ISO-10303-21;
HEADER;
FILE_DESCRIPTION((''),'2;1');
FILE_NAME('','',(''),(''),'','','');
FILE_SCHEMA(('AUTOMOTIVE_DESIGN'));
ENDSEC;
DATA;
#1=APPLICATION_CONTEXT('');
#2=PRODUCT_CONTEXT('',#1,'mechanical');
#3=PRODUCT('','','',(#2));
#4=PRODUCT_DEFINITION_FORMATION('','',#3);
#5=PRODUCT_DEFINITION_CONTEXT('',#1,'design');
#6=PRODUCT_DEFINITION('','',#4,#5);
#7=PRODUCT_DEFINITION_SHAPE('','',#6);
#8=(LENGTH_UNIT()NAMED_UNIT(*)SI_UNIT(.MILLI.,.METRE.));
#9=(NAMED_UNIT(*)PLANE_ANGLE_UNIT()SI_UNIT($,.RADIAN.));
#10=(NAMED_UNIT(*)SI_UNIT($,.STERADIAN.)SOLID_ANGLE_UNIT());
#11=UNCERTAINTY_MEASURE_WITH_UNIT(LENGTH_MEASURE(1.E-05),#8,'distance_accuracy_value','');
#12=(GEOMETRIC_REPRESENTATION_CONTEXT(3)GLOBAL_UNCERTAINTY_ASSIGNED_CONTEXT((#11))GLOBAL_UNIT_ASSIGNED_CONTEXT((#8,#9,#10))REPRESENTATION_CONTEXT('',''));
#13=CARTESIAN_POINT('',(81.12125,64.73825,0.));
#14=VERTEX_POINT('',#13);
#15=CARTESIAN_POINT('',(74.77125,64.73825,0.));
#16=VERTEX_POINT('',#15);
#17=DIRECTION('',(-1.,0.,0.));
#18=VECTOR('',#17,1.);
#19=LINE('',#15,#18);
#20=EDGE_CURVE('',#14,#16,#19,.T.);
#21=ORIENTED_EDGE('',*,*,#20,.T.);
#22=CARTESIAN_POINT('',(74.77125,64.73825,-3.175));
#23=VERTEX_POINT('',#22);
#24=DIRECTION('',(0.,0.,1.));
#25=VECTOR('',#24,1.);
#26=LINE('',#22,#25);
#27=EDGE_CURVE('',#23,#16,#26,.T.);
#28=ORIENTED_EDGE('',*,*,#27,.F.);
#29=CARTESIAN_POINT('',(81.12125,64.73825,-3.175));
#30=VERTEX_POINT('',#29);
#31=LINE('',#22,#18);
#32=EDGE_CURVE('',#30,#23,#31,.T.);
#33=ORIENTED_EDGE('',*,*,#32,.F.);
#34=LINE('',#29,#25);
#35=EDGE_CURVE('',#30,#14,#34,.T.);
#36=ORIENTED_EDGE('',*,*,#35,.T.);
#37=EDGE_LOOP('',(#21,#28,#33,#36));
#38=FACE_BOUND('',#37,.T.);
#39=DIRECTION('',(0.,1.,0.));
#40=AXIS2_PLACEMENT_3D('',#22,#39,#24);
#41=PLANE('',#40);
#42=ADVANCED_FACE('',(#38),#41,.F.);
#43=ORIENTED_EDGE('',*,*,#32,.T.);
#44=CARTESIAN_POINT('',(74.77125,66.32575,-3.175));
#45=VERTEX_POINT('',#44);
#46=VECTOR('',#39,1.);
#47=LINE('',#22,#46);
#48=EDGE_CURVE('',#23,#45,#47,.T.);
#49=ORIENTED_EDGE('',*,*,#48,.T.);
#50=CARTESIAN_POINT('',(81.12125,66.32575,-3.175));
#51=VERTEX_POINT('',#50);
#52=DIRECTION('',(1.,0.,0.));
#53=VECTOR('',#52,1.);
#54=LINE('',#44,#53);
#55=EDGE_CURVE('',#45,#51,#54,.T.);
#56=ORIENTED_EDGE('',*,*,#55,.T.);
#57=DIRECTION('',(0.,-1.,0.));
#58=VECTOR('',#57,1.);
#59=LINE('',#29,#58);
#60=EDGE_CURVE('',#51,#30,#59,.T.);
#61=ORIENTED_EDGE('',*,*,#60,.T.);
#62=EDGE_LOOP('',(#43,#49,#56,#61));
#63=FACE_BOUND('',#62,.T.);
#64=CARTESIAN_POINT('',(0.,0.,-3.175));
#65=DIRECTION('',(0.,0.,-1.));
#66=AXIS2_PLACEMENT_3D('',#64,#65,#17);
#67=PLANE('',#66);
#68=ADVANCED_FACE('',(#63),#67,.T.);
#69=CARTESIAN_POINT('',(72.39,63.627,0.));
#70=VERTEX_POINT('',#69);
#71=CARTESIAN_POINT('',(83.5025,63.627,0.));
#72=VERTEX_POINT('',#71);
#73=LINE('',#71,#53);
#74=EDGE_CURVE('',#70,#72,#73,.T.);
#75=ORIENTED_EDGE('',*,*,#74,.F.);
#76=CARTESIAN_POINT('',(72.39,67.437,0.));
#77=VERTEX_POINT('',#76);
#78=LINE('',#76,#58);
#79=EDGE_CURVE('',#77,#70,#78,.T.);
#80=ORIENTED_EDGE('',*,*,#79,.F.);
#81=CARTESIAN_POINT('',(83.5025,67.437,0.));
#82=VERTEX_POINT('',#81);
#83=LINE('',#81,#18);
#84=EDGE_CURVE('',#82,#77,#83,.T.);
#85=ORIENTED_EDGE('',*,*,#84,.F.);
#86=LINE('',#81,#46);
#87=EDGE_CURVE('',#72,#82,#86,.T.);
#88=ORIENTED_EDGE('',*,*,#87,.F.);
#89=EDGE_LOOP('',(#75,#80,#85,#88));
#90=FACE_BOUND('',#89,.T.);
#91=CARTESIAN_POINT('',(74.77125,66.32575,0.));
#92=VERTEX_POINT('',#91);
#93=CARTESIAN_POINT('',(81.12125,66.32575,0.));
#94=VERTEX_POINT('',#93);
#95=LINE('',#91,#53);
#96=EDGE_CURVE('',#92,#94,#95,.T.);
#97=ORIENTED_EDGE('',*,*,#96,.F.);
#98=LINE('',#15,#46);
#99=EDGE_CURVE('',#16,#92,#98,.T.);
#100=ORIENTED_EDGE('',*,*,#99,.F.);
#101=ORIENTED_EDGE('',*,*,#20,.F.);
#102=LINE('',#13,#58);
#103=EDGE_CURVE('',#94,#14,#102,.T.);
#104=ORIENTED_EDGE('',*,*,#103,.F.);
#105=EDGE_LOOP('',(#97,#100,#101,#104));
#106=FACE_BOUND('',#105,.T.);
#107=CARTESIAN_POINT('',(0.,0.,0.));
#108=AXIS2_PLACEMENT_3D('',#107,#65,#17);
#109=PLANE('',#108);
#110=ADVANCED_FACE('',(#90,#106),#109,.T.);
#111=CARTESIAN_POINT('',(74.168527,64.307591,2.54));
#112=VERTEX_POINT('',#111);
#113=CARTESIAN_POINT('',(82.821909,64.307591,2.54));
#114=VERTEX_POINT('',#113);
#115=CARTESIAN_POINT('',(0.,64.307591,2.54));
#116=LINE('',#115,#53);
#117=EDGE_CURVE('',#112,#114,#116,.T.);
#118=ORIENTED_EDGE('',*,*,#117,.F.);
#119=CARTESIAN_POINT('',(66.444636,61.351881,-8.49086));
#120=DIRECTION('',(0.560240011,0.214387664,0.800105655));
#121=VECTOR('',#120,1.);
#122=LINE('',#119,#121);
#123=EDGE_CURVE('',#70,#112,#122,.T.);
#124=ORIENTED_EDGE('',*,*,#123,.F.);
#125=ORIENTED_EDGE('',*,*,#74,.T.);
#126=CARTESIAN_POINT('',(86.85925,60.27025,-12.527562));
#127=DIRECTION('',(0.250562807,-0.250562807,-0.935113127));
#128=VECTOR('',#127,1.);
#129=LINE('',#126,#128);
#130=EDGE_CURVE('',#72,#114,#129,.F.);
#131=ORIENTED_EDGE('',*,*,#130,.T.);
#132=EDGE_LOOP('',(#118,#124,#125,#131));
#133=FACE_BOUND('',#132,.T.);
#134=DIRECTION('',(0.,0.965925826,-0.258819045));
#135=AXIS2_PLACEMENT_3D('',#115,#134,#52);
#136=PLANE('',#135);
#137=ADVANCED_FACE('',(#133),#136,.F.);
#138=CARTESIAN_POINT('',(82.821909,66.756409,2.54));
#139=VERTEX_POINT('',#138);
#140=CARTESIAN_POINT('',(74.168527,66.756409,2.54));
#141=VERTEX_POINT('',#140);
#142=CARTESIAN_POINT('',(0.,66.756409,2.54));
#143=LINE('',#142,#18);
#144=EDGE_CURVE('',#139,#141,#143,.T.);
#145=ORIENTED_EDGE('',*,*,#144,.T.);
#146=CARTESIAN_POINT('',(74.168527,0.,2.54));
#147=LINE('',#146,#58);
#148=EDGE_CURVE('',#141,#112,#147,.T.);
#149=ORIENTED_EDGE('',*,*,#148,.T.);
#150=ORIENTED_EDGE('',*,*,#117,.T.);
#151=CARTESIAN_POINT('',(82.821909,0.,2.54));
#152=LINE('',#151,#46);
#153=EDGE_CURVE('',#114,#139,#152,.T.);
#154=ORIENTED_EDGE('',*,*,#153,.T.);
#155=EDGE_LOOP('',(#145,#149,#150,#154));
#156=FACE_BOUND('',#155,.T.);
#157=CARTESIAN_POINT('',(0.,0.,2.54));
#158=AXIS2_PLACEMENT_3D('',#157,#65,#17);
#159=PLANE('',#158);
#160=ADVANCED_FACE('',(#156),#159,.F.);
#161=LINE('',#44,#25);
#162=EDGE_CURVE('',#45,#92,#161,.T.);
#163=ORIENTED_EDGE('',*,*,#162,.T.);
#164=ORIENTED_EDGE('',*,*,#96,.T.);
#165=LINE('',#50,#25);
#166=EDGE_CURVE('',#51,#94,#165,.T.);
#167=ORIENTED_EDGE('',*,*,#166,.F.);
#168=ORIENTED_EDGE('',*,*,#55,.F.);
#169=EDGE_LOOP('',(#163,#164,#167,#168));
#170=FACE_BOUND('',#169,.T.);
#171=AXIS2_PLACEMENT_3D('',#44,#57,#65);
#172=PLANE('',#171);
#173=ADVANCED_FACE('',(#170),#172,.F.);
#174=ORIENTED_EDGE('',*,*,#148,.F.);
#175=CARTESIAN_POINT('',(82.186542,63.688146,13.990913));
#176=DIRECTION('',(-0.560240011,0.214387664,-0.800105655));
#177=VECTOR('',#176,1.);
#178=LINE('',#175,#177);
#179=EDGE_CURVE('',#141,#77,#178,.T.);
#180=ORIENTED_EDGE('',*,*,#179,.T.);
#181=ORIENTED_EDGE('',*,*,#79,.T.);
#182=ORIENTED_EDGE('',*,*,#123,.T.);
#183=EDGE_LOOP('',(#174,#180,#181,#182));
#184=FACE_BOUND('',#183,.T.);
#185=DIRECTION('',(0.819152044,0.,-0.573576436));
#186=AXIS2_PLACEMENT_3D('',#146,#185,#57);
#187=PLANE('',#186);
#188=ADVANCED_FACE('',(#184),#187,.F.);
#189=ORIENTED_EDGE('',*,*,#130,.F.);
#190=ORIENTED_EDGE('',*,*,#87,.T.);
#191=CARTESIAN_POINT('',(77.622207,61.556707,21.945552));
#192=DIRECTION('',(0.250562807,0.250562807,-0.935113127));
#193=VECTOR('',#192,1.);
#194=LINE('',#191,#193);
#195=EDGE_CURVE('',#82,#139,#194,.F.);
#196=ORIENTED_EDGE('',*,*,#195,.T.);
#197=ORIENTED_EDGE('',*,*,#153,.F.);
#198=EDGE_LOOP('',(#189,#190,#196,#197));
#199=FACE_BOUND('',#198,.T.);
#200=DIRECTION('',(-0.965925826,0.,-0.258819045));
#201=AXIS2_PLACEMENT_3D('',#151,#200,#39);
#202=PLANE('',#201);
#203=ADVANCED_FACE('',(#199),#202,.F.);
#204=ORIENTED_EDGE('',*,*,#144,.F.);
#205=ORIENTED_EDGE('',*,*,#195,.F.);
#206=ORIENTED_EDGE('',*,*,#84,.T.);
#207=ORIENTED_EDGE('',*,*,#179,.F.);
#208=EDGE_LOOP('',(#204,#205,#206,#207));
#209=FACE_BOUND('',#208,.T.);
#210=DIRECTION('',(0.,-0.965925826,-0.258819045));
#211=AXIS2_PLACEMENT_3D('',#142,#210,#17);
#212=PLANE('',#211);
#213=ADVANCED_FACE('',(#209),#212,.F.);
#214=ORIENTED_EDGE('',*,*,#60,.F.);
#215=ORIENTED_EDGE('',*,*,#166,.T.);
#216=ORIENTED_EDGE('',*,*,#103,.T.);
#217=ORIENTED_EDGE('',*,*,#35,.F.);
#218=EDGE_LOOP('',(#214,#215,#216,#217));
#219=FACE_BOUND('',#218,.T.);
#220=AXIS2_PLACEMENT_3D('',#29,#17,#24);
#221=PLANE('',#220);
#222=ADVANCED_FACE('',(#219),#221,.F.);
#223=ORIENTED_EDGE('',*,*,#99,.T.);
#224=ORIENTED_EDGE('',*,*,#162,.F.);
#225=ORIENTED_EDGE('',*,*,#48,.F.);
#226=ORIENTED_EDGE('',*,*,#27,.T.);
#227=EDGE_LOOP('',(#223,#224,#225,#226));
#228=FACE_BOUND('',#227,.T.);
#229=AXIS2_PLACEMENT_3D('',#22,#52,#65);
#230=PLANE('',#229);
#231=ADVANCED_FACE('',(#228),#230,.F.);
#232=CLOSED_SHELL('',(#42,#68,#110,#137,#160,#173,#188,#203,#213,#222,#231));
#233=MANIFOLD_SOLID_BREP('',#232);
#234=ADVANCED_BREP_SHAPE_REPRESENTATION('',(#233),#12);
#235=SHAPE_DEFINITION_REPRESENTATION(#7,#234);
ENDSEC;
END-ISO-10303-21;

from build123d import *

# Parameters (mm, degrees)
SKETCH1_W           = 11.1125
SKETCH1_H           = 3.81
BOSS_EXTRUDE1_DEPTH = 2.54
CHAMFER1_SIZE       = 2.54
CHAMFER1_SIZE_2     = 1.778527147
CHAMFER2_SIZE       = 0.680590949
CHAMFER2_SIZE_2     = 2.54
SKETCH2_W           = 6.35
SKETCH2_H           = 1.5875
BOSS_EXTRUDE2_DEPTH = 3.175


with BuildPart() as part:
    # Sketch1 → Boss-Extrude1 (new body)
    with BuildSketch(Plane.XY):
        with Locations((77.94625, 65.532)):
            Rectangle(SKETCH1_W, SKETCH1_H)
    extrude(amount=BOSS_EXTRUDE1_DEPTH)

    # Chamfer1
    # the kernel refuses this chamfer: 2.54, 1.778527147 mm, written as the material it takes off along each edge
    with BuildSketch(Plane(origin=(72.39, 73.996682665, 2.54), x_dir=(-0.02220967419845826, 0, -0.9997533347641299), z_dir=(0, -1, 0))) as chamfer1_piece_1:
        Polygon((CHAMFER1_SIZE * 0.999753334764, CHAMFER1_SIZE * 0.0222096741985), (-CHAMFER1_SIZE_2 * 0.0222096741991, CHAMFER1_SIZE_2 * 0.999753334794), (0, 0), align=None)
    extrude(amount=16.92936533, mode=Mode.SUBTRACT)

    # Chamfer2
    # the kernel refuses this chamfer: 2.54, 0.680590949 mm, written as the material it takes off along each edge
    with BuildSketch(Plane(origin=(67.572854359, 63.627, 2.54), x_dir=(0, 0.9905000388259545, 0.13751244702128823), z_dir=(1, 0, 0))) as chamfer2_piece_1:
        Polygon((CHAMFER2_SIZE * 0.990500038499, -CHAMFER2_SIZE * 0.137512446976), (-CHAMFER2_SIZE_2 * 0.137512447021, -CHAMFER2_SIZE_2 * 0.990500038826), (0, 0), align=None)
    extrude(amount=22.52531843, mode=Mode.SUBTRACT)
    with BuildSketch(Plane(origin=(83.5025, 57.031327212, 2.54), x_dir=(-0.9905000388259543, 0, 0.13751244702128956), z_dir=(0, 1, 0))) as chamfer2_piece_2:
        Polygon((CHAMFER2_SIZE * 0.990500038499, -CHAMFER2_SIZE * 0.137512446976), (-CHAMFER2_SIZE_2 * 0.137512447021, -CHAMFER2_SIZE_2 * 0.990500038826), (0, 0), align=None)
    extrude(amount=17.001345577, mode=Mode.SUBTRACT)
    with BuildSketch(Plane(origin=(90.098172788, 67.437, 2.54), x_dir=(0, 0.009967146577158238, -0.9999503267608394), z_dir=(-1, 0, 0))) as chamfer2_piece_3:
        Polygon((CHAMFER2_SIZE_2 * 0.999950326761, CHAMFER2_SIZE_2 * 0.00996714657716), (-CHAMFER2_SIZE * 0.00996714657386, CHAMFER2_SIZE * 0.99995032643), (0, 0), align=None)
    extrude(amount=22.52531843, mode=Mode.SUBTRACT)

    # Sketch2 → Boss-Extrude2 (add)
    with BuildSketch(Plane(origin=(0, 0, 0), x_dir=(-1, 0, 0), z_dir=(0, 0, -1))):
        with Locations((-77.94625, 65.532)):
            Rectangle(SKETCH2_W, SKETCH2_H)
    extrude(amount=BOSS_EXTRUDE2_DEPTH)


solid = part.part
